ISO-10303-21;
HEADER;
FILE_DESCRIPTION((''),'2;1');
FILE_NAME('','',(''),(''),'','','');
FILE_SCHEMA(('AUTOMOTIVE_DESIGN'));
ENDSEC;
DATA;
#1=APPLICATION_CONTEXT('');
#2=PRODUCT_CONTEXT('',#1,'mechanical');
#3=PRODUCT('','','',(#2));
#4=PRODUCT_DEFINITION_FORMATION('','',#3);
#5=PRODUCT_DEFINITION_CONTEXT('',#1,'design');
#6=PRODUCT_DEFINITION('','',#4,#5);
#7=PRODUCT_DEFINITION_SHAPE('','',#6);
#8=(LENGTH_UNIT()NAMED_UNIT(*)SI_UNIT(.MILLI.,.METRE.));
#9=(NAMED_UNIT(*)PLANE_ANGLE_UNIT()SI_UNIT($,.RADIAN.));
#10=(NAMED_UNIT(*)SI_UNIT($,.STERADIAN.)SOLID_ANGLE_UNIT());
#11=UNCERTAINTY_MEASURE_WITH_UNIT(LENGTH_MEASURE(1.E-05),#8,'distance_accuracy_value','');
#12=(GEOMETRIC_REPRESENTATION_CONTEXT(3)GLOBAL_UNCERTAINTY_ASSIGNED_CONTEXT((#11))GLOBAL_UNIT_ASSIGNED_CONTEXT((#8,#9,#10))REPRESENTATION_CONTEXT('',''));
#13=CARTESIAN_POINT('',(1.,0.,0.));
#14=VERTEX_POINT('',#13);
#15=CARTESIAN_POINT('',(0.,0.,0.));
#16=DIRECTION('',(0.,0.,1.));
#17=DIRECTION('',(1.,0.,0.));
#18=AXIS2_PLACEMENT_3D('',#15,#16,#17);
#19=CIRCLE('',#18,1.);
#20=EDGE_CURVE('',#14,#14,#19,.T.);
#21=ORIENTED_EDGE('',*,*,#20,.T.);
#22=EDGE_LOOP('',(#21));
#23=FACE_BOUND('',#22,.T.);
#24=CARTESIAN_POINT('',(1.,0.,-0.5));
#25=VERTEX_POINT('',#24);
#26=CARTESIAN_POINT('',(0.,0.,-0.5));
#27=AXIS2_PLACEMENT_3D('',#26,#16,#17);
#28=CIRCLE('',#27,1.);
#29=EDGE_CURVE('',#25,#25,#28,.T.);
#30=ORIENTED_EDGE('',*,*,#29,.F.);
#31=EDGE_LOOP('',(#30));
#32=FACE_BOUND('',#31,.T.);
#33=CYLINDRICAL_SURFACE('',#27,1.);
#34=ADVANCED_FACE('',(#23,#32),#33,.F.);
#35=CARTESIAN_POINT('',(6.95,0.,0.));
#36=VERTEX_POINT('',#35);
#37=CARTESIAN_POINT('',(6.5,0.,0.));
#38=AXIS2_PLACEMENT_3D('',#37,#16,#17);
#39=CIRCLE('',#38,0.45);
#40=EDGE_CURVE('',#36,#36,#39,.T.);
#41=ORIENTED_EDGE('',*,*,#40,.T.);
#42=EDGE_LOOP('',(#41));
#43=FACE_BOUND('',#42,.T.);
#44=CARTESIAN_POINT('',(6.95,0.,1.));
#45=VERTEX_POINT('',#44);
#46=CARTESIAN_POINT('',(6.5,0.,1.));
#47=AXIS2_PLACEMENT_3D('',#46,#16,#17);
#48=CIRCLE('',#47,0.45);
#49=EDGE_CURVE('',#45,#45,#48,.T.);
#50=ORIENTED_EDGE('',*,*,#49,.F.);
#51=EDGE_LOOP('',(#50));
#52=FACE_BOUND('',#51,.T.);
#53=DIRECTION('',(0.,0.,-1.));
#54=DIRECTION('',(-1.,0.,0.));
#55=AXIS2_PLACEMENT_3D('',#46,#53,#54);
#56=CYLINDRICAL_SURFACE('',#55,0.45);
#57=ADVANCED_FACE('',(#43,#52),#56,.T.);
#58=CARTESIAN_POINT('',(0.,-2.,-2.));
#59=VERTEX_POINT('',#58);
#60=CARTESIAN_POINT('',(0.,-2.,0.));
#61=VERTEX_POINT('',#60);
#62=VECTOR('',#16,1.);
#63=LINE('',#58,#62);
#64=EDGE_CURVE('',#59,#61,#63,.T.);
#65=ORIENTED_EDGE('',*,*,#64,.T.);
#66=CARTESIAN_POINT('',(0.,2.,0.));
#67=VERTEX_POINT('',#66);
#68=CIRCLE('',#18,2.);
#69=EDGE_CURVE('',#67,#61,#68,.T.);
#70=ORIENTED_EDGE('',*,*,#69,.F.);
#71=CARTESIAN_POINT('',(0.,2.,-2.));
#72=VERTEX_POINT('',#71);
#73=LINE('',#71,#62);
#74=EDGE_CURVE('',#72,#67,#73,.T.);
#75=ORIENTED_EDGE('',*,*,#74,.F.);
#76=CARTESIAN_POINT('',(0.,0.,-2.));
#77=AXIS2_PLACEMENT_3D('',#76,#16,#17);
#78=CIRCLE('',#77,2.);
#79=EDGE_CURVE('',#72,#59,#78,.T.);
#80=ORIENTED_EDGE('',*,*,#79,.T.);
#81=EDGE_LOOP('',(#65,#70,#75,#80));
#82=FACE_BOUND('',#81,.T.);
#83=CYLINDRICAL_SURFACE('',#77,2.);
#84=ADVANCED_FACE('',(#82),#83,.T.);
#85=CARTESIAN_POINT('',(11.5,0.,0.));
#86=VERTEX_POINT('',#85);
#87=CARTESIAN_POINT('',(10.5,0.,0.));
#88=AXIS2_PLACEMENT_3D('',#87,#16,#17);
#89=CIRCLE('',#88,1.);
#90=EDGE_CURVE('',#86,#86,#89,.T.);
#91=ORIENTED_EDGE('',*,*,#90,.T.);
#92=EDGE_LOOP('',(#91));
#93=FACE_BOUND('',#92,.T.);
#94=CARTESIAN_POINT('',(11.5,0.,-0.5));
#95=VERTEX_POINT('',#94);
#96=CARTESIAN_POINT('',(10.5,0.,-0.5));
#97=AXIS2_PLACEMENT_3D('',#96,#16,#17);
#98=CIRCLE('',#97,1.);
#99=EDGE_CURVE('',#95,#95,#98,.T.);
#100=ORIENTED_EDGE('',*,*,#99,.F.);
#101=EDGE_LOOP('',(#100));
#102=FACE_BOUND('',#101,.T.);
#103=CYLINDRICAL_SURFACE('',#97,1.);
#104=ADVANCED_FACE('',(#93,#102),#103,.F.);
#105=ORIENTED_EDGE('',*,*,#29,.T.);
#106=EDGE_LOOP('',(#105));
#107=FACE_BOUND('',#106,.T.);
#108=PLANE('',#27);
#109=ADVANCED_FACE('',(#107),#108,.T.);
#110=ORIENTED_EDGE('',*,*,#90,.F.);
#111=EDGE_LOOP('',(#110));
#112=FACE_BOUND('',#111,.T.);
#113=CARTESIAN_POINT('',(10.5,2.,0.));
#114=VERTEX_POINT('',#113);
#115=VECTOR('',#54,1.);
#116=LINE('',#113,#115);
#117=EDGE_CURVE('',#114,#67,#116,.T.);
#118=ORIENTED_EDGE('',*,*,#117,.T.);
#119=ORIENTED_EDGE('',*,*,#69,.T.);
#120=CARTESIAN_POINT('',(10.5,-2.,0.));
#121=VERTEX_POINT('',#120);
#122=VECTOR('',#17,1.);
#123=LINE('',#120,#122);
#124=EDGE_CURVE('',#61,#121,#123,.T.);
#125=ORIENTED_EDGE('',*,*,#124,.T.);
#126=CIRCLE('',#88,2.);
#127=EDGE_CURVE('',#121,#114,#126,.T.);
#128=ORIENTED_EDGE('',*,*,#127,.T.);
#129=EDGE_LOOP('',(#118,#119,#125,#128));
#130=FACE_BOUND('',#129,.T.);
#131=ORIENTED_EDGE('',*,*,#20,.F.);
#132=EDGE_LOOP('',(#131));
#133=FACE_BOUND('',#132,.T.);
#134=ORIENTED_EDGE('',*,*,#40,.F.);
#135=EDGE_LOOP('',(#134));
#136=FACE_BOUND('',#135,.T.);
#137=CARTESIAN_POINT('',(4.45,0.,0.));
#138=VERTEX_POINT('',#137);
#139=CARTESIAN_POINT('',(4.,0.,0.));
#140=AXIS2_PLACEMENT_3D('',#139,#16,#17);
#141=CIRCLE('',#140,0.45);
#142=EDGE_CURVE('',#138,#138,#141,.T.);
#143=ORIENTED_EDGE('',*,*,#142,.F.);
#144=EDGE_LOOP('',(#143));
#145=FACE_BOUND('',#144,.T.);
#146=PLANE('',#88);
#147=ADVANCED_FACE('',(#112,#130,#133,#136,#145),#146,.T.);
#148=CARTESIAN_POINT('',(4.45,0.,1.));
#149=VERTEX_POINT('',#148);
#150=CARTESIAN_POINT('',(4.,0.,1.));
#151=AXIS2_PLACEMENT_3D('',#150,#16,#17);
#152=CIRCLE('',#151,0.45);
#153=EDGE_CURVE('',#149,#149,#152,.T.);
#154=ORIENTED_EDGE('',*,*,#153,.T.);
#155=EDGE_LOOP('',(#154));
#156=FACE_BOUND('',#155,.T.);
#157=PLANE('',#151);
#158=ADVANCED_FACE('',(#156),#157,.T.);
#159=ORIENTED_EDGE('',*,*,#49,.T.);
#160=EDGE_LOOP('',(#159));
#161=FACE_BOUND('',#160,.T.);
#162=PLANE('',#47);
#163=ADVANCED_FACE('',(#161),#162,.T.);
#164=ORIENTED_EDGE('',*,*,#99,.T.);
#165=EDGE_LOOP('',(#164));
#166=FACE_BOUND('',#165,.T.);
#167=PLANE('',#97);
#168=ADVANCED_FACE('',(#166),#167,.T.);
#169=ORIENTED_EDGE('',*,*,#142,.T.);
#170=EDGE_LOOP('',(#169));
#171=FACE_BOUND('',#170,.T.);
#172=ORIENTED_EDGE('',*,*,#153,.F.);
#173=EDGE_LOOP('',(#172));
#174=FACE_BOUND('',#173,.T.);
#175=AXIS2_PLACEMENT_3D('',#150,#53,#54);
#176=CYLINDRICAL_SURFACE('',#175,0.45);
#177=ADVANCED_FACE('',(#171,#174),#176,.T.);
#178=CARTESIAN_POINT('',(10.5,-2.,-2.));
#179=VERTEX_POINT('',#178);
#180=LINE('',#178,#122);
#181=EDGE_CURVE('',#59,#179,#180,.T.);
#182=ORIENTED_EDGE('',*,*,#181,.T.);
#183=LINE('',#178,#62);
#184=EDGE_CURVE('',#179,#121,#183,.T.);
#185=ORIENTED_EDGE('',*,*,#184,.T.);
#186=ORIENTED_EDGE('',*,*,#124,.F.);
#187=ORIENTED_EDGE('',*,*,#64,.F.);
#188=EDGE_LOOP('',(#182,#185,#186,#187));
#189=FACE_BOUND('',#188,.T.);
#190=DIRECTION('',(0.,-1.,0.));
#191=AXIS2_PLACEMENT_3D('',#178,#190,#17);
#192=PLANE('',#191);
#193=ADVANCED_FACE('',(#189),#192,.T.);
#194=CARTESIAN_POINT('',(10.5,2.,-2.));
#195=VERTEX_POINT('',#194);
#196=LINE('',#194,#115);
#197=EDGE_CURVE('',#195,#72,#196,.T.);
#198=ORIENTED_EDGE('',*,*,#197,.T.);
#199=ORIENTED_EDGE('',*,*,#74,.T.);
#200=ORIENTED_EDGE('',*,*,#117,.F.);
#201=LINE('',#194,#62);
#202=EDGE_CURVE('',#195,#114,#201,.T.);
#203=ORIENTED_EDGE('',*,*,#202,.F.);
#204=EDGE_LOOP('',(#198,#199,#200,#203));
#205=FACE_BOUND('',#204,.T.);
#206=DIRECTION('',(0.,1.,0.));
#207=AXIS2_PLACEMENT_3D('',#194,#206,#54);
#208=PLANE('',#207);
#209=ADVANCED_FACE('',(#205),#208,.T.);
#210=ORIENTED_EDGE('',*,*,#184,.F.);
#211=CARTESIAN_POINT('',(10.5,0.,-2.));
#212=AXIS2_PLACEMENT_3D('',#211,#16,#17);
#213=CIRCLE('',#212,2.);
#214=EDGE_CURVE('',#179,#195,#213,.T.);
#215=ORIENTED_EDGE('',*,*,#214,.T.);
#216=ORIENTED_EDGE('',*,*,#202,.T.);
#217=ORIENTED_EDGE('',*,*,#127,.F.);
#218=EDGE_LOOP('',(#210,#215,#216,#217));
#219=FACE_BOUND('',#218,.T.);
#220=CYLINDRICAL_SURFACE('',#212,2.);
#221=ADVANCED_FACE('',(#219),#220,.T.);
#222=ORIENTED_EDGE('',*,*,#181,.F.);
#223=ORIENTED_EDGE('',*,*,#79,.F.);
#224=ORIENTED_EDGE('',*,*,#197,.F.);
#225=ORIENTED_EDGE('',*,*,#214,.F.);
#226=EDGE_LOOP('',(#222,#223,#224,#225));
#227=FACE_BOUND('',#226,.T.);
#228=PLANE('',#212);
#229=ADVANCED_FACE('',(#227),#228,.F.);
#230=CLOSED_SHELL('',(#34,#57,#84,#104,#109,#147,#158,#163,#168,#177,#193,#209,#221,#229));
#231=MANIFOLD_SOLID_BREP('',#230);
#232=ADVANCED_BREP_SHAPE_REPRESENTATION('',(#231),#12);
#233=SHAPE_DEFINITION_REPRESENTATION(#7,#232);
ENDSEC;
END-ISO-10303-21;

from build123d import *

# Parameters (mm, degrees)
BASE_FLANGE1_DEPTH  = 2
SKETCH6_R           = 1
CUT_EXTRUDE1_DEPTH  = 0.5
SKETCH8_R           = 0.45
BOSS_EXTRUDE1_DEPTH = 1


# Sheet-metal steps are written as plain solids
with BuildPart() as part:
    # Sketch1 → Base-Flange1 (new body)
    with BuildSketch(Plane.XY):
        with BuildLine():
            Line((10.5, -2), (0, -2))
            ThreePointArc((0, -2), (-2, 0), (0, 2))
            Line((0, 2), (10.5, 2))
            ThreePointArc((10.5, 2), (12.5, 0), (10.5, -2))
        make_face()
    extrude(amount=-BASE_FLANGE1_DEPTH)

    # Sketch6 → Cut-Extrude1 (cut)
    with BuildSketch(Plane.XY):
        Circle(SKETCH6_R)
        with Locations((10.5, 0)):
            Circle(SKETCH6_R)
    extrude(amount=-CUT_EXTRUDE1_DEPTH, mode=Mode.SUBTRACT)

    # Sketch8 → Boss-Extrude1 (add)
    with BuildSketch(Plane.XY):
        with Locations((4, 0)):
            Circle(SKETCH8_R)
        with Locations((6.5, 0)):
            Circle(SKETCH8_R)
    extrude(amount=BOSS_EXTRUDE1_DEPTH)


solid = part.part
